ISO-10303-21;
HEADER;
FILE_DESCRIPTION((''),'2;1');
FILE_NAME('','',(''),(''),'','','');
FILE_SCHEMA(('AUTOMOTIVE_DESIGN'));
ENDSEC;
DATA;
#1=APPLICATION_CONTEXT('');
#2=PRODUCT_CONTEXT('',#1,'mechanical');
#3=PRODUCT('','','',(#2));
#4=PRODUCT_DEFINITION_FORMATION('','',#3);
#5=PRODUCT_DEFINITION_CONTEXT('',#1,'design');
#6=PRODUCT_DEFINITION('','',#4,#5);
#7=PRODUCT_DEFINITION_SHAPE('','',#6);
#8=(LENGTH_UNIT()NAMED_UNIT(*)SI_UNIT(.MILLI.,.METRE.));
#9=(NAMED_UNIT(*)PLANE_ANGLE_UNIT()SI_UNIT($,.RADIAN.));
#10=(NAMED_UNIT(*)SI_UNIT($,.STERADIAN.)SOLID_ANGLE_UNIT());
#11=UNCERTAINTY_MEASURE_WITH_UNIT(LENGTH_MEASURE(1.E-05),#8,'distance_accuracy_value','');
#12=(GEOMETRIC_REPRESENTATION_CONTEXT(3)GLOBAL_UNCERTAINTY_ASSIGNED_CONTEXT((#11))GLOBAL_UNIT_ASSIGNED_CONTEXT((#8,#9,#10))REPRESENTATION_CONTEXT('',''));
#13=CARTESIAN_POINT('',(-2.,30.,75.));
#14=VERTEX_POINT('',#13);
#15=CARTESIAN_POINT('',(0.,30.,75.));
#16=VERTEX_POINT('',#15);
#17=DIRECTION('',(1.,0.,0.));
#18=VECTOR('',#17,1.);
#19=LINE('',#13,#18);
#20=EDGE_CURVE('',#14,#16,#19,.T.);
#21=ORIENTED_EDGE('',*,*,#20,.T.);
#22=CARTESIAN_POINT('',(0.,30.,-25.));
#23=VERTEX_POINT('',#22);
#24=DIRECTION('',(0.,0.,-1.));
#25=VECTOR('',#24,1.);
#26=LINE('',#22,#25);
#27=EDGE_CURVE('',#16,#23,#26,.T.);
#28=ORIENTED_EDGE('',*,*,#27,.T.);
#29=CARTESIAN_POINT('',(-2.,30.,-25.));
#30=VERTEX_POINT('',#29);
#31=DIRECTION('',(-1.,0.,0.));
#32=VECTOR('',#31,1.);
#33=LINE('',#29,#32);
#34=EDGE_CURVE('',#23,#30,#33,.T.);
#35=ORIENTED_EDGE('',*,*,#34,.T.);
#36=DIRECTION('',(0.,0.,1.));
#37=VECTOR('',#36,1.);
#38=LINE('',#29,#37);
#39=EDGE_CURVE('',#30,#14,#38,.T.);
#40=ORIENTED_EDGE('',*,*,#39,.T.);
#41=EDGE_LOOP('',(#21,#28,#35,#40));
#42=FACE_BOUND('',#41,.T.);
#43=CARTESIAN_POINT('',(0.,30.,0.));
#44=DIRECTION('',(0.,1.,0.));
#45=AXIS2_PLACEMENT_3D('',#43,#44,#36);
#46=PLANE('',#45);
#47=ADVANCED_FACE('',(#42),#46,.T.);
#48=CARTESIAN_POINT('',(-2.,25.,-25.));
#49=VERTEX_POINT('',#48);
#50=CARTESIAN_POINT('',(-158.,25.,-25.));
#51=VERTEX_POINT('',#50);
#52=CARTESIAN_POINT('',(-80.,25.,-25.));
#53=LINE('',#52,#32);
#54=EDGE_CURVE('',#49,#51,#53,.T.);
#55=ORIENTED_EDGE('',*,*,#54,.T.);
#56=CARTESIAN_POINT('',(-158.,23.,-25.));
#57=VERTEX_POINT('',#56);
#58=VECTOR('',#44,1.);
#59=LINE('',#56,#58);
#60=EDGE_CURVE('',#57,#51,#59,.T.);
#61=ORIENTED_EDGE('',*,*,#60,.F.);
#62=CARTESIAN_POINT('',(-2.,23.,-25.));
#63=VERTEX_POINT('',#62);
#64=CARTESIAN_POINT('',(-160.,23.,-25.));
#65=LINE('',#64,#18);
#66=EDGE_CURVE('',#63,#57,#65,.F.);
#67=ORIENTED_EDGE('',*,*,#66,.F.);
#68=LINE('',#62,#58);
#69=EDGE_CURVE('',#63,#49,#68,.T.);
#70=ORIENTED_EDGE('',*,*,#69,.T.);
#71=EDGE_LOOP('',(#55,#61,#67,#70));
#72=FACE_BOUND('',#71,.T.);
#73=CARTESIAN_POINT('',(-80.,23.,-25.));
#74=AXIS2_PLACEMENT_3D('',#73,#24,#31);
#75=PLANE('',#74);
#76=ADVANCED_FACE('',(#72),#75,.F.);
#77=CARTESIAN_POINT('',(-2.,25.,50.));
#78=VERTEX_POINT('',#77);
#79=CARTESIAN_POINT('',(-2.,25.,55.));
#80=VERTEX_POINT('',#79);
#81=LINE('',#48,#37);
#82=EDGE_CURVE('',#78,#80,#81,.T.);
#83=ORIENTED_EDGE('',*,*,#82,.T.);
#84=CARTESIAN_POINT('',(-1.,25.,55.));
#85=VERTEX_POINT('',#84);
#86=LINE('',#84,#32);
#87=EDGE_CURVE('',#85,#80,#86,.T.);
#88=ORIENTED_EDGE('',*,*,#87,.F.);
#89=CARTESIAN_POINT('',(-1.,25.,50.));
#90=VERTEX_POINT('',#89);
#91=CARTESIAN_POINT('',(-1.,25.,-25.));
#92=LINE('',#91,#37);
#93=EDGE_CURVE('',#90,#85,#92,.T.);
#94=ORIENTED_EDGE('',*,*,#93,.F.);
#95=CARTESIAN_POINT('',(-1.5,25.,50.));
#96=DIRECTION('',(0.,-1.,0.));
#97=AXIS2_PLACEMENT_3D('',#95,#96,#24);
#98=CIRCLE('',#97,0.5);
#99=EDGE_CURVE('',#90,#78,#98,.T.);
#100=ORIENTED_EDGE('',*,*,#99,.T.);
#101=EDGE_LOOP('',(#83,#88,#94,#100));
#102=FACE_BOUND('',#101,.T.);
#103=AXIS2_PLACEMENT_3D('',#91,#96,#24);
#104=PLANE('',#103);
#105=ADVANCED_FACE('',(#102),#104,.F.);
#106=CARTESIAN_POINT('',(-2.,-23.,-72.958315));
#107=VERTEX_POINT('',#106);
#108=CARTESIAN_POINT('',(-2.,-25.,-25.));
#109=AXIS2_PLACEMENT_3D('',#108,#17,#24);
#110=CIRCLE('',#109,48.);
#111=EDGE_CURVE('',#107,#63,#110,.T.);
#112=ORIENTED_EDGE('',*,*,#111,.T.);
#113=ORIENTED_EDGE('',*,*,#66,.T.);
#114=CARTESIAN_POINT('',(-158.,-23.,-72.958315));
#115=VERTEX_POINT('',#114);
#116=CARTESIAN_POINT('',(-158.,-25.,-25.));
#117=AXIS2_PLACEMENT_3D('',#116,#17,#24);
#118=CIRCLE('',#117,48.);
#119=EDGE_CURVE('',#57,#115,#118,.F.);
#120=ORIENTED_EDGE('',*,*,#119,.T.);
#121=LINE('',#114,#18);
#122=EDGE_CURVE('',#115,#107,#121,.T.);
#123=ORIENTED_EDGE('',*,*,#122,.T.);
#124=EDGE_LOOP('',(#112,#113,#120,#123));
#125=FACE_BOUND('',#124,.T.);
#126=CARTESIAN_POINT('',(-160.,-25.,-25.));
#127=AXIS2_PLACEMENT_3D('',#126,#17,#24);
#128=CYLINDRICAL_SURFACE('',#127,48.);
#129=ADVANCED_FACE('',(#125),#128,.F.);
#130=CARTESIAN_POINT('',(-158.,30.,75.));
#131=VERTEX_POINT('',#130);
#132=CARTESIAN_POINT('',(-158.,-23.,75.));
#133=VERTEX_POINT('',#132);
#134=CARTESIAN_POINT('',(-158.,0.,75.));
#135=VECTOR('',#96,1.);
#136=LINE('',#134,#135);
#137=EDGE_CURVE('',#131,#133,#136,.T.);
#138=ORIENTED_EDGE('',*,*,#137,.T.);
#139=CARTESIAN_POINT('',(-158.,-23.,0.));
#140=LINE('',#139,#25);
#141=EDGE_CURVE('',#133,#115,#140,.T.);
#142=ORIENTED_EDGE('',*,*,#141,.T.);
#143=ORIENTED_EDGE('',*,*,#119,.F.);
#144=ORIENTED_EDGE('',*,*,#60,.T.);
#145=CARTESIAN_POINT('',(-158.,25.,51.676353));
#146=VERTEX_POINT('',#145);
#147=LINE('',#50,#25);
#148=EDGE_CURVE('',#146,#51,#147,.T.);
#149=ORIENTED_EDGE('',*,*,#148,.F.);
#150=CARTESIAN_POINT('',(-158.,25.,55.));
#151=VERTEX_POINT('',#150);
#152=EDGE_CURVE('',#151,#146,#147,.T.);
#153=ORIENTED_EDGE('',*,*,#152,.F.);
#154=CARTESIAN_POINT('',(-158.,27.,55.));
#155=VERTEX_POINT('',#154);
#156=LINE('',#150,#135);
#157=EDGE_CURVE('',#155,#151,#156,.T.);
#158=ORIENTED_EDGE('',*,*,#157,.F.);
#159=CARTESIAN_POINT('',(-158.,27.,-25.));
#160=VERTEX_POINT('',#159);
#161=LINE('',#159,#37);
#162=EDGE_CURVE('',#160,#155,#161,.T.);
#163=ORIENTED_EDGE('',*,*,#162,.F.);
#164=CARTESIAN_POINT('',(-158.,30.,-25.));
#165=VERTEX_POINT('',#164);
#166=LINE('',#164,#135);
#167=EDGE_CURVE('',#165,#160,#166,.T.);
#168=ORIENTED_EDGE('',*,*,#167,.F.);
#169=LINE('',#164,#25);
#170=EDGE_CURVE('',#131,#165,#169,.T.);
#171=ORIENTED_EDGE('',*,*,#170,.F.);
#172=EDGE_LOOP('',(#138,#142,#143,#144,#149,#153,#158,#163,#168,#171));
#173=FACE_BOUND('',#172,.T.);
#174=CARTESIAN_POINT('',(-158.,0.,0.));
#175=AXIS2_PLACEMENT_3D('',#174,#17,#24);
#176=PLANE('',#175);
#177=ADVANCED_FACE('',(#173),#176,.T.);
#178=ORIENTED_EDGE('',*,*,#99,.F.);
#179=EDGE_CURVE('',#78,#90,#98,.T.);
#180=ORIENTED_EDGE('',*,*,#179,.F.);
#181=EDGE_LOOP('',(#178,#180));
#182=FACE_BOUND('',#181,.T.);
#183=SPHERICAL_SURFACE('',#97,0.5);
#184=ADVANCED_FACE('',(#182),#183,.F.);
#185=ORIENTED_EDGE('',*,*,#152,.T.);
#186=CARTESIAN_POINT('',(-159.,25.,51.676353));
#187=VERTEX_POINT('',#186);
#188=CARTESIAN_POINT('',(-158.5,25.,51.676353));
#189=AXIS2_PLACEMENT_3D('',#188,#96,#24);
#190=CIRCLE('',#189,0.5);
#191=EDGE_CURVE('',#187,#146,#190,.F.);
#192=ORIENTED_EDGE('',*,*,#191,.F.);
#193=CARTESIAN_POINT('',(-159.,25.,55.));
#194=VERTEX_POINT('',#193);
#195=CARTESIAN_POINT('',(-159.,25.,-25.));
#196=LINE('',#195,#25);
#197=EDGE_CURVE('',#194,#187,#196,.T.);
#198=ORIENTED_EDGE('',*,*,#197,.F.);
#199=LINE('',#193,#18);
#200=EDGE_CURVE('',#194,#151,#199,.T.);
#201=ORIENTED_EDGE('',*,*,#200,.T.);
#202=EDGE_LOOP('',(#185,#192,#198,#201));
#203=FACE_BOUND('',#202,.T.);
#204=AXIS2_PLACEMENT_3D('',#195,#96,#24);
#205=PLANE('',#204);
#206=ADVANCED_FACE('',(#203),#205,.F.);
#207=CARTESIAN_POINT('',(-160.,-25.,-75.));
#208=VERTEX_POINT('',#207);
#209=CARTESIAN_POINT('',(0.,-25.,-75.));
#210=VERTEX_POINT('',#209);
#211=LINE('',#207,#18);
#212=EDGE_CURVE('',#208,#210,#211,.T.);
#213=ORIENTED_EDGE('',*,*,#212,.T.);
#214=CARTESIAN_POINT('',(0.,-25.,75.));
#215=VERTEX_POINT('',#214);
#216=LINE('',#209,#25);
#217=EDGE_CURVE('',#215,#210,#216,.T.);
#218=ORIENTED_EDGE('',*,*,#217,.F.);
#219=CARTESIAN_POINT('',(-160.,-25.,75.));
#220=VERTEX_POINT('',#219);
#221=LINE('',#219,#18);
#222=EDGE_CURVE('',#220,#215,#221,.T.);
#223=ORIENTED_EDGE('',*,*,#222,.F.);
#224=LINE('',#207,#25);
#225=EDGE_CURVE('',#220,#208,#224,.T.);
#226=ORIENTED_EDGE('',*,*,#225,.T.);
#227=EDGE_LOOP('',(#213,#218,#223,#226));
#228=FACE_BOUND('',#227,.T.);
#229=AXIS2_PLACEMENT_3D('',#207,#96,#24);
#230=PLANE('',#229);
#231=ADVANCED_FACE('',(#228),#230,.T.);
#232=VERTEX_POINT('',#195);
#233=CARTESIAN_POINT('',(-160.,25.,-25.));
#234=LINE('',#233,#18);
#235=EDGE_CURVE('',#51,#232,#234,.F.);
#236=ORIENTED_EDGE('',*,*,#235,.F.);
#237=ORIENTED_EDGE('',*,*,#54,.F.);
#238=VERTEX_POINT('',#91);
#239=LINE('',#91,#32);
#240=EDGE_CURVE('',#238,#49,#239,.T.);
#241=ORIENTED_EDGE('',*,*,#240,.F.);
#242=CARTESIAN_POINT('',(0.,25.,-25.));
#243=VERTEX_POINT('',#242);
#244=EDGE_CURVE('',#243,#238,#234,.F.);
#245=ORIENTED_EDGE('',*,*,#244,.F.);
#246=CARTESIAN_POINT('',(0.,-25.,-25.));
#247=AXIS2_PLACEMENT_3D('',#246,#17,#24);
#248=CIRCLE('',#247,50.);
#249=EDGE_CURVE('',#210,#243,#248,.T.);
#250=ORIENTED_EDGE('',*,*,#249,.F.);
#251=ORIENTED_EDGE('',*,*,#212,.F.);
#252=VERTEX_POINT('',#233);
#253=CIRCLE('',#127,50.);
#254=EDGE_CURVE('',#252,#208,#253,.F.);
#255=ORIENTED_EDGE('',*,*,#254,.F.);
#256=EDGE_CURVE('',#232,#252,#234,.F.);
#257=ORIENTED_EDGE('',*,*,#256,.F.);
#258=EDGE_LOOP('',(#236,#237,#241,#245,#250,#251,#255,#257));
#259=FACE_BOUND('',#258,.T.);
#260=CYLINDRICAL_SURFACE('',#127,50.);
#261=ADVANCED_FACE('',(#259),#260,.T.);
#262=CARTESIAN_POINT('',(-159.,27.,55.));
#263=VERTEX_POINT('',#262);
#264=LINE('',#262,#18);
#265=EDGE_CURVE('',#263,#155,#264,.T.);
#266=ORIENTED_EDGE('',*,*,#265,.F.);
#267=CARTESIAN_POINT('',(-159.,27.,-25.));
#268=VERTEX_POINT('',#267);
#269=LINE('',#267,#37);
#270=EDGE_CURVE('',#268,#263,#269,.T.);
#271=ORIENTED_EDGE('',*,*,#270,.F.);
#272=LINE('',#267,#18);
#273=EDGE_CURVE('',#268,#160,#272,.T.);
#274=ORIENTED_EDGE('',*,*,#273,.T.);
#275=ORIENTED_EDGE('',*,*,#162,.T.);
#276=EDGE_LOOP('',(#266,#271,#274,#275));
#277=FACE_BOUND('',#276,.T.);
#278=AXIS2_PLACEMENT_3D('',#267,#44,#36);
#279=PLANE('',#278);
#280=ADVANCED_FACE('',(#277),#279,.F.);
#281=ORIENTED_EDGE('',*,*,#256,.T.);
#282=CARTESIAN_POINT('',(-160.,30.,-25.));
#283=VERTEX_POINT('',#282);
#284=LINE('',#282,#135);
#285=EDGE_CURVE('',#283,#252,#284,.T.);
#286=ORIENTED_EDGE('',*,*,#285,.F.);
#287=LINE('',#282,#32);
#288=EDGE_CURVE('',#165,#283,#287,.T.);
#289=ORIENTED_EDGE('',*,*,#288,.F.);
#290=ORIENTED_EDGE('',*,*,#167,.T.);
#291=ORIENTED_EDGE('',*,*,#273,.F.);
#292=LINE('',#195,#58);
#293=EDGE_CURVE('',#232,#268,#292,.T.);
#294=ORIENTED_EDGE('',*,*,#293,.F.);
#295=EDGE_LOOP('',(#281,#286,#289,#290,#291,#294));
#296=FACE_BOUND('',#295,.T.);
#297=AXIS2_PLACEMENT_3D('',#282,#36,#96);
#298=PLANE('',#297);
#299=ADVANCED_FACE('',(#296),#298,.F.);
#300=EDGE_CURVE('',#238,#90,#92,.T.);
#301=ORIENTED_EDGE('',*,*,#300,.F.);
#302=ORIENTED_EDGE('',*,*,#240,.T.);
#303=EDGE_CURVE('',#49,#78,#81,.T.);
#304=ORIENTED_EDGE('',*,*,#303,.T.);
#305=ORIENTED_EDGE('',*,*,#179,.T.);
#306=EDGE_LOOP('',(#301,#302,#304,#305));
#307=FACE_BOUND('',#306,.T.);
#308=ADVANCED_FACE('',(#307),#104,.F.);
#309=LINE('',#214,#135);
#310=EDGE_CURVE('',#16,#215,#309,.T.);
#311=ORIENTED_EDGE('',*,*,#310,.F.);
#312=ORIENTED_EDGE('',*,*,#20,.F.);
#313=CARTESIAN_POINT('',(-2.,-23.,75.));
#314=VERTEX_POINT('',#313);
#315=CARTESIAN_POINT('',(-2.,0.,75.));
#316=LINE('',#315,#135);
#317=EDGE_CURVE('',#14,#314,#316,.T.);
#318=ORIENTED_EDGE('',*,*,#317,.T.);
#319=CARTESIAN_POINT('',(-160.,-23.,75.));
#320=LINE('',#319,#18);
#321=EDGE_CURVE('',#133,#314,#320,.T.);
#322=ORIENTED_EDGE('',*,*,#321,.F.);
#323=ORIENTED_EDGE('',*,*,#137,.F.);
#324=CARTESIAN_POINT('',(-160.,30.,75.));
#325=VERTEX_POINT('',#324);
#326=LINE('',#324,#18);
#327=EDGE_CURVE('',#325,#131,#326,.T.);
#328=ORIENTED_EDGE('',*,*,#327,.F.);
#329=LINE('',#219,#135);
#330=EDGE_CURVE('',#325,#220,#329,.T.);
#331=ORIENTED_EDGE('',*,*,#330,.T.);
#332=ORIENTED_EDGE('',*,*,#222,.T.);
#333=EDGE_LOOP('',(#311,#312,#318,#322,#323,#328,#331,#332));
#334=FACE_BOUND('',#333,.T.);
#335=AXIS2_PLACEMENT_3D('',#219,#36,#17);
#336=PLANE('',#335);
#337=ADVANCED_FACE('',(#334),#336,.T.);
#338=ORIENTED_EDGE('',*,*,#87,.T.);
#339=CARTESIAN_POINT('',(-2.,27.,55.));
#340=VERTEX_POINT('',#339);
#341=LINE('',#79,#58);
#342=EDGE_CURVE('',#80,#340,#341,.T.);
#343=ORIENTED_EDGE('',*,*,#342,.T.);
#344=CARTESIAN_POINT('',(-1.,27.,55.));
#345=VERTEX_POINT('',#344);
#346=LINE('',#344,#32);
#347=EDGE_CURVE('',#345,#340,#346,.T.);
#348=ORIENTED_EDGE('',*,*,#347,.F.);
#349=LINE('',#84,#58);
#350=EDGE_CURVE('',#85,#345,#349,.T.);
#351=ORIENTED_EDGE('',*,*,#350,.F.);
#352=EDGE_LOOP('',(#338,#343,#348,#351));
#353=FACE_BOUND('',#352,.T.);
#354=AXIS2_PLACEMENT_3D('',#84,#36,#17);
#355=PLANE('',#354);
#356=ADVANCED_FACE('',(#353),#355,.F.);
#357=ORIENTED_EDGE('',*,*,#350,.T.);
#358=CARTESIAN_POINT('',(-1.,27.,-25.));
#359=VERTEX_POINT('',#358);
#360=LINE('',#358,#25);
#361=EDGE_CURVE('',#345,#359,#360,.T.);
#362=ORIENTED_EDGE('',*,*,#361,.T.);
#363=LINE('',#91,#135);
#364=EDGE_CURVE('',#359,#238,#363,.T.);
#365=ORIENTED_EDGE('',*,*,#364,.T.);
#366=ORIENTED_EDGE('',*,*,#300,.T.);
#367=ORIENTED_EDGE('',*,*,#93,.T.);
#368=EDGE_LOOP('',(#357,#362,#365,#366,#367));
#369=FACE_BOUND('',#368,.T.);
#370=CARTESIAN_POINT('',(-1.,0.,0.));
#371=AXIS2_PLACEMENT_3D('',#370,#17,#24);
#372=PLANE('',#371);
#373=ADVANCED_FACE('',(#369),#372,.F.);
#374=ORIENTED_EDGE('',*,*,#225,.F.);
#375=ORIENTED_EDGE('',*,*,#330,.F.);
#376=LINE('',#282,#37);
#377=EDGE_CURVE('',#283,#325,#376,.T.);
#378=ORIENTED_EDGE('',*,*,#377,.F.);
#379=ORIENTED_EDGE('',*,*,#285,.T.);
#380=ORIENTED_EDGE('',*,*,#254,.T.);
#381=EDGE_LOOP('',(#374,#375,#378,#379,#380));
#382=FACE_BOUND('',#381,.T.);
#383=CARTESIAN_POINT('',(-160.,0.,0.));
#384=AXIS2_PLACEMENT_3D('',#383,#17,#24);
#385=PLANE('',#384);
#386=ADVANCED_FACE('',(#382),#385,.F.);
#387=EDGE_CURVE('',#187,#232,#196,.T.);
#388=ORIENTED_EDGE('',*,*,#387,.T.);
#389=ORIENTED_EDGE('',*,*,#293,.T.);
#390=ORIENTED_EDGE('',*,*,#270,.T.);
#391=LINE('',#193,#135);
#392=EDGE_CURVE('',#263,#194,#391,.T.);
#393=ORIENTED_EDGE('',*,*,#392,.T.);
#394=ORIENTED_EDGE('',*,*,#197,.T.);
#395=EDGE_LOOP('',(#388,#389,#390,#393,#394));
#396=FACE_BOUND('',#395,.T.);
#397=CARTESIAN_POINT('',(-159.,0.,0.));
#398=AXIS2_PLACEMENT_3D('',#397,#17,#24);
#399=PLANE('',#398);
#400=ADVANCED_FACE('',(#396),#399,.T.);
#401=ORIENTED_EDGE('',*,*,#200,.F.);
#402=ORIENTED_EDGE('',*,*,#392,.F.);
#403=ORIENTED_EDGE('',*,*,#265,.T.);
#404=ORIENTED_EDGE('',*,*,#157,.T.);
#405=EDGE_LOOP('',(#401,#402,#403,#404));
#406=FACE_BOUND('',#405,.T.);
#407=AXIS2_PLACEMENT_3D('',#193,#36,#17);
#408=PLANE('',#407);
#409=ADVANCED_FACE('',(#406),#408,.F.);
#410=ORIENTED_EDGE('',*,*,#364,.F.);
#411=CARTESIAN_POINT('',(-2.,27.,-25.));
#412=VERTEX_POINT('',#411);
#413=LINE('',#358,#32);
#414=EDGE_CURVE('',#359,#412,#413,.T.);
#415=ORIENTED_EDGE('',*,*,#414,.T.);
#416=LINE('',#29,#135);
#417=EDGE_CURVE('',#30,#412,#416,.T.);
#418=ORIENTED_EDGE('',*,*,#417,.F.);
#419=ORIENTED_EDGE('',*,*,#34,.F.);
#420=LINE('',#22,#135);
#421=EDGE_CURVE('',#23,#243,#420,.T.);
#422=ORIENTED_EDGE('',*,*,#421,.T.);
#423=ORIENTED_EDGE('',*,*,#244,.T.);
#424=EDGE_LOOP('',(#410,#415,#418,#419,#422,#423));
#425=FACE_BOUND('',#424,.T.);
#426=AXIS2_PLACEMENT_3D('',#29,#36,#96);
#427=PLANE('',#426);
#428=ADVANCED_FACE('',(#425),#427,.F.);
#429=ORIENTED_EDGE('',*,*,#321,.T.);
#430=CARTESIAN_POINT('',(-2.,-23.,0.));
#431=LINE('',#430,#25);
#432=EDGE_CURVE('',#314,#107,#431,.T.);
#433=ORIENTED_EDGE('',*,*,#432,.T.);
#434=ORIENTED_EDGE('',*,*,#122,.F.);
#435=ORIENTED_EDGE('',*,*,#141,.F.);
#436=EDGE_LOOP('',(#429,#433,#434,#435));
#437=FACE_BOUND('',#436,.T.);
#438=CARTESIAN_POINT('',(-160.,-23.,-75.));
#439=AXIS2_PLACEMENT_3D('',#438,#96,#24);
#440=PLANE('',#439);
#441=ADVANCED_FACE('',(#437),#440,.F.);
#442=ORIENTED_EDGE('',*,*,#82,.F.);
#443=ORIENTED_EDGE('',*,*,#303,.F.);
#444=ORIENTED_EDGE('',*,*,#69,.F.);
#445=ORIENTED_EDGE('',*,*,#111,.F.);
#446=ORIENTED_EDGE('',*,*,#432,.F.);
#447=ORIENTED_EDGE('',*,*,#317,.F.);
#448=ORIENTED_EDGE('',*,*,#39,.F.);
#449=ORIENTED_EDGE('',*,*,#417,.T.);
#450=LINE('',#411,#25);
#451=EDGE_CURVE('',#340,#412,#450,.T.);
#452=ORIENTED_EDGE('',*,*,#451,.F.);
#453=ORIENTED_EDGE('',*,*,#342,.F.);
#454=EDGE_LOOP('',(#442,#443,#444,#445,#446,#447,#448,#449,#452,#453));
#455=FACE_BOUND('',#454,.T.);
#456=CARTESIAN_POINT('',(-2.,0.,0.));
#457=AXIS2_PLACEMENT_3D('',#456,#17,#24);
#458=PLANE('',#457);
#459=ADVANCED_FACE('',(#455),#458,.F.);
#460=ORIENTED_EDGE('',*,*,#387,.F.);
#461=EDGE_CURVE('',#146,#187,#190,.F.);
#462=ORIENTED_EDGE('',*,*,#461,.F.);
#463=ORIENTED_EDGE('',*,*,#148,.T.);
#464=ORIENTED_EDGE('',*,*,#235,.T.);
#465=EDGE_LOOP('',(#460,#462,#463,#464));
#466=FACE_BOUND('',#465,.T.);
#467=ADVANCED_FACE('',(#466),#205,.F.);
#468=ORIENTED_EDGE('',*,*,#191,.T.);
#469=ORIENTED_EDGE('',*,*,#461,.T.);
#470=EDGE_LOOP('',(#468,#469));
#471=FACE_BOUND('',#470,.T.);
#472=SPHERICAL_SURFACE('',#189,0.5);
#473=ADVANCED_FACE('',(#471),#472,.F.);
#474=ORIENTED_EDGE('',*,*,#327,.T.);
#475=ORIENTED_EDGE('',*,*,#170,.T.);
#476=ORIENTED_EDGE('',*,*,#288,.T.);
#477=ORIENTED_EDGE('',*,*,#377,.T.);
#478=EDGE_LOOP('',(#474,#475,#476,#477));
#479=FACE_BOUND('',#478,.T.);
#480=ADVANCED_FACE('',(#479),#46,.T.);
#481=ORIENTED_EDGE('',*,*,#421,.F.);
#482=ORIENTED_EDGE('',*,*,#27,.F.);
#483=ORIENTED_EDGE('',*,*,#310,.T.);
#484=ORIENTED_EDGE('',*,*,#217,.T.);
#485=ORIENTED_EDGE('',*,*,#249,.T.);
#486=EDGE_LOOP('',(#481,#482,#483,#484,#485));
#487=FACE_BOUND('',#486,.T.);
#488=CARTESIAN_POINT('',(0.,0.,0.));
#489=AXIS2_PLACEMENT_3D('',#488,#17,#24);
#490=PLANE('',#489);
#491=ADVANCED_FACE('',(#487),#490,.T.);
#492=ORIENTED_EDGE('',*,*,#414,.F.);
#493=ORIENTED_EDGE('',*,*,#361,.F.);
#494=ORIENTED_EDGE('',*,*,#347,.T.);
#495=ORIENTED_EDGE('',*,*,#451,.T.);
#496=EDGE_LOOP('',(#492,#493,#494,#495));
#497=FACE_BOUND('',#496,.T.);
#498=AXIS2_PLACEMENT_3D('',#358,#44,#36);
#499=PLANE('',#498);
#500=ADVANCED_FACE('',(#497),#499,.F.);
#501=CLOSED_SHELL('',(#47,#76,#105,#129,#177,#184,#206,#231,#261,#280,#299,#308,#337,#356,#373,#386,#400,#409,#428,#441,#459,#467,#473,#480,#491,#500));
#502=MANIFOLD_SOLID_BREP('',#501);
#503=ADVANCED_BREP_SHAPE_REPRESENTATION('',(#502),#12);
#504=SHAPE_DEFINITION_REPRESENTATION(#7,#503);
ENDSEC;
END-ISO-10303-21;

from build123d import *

# Parameters (mm, degrees)
SKETCH1_W           = 150
SKETCH1_H           = 50
BOSS_EXTRUDE1_DEPTH = 160
FILLET2_R           = 50
SHELL1_T            = -2
CUT_EXTRUDE1_DEPTH  = 2
SKETCH20_W          = 2
SKETCH20_H          = 100
BOSS_EXTRUDE2_DEPTH = 5
SKETCH21_W          = 80
SKETCH21_H          = 2
CUT_EXTRUDE2_DEPTH  = 1
SKETCH22_W          = 80
SKETCH22_H          = 2
CUT_EXTRUDE3_DEPTH  = 1


with BuildPart() as part:
    # Sketch1 → Boss-Extrude1 (new body)
    with BuildSketch(Plane(origin=(0, 0, 0), x_dir=(0, 0, -1), z_dir=(1, 0, 0))):
        Rectangle(SKETCH1_W, SKETCH1_H)
    extrude(amount=-BOSS_EXTRUDE1_DEPTH)

    # Fillet2
    fillet2_edges = [part.edges().sort_by_distance(p)[0] for p in [
        (-80, 25, -75),
    ]]
    fillet(fillet2_edges, radius=FILLET2_R - 0.0001)  # a hair under: the kernel refuses the full size

    # Shell1
    shell1_openings = [part.faces().sort_by_distance(p)[0] for p in [
        (-80, 0, 75),
    ]]
    offset(amount=SHELL1_T, openings=shell1_openings, kind=Kind.INTERSECTION)

    # Sketch17 → Cut-Extrude1 (cut)
    with BuildSketch(Plane(origin=(0, 25, 0), x_dir=(1, 0, 0), z_dir=(0, 1, 0))):
        Polygon((-80, 25), (-158, 25), (-158, -75), (-2, -75), (-2, 25), align=None)
    extrude(amount=-CUT_EXTRUDE1_DEPTH, mode=Mode.SUBTRACT)

    # Sketch20 → Boss-Extrude2 (add)
    with BuildSketch(Plane(origin=(0, 25, 0), x_dir=(1, 0, 0), z_dir=(0, 1, 0))):
        with Locations((-159, -25)):
            Rectangle(SKETCH20_W, SKETCH20_H)
        with Locations((-1, -25)):
            Rectangle(SKETCH20_W, SKETCH20_H)
    extrude(amount=BOSS_EXTRUDE2_DEPTH)

    # Sketch21 → Cut-Extrude2 (cut)
    with BuildSketch(Plane(origin=(-158, 0, 0), x_dir=(0, 0, -1), z_dir=(1, 0, 0))):
        with Locations((-15, 26)):
            Rectangle(SKETCH21_W, SKETCH21_H)
    extrude(amount=-CUT_EXTRUDE2_DEPTH, mode=Mode.SUBTRACT)

    # Sketch22 → Cut-Extrude3 (cut)
    with BuildSketch(Plane.ZY.offset(2)):
        with Locations((15, 26)):
            Rectangle(SKETCH22_W, SKETCH22_H)
    extrude(amount=-CUT_EXTRUDE3_DEPTH, mode=Mode.SUBTRACT)

    # Sketch25 → Cut-Revolve1 (revolve, cut)
    with BuildSketch(Plane(origin=(0, 25, 0), x_dir=(1, 0, 0), z_dir=(0, 1, 0))):
        with BuildLine():
            ThreePointArc((-1.475259699, -50.499387542), (-1.999387542, -50.024740301), (-1.524740301, -49.500612458))
            Line((-1.524740301, -49.500612458), (-1.5, -50))
            Line((-1.5, -50), (-1.475259699, -50.499387542))
        make_face()
    revolve(axis=Axis((-1.5, 25, 50), (-0.049480602249094376, 0, -0.9987750847919)), mode=Mode.SUBTRACT)

    # Sketch26 → Cut-Revolve2 (revolve, cut)
    with BuildSketch(Plane(origin=(0, 25, 0), x_dir=(1, 0, 0), z_dir=(0, 1, 0))):
        with BuildLine():
            Line((-158, -51.676352911), (-159, -51.676352911))
            ThreePointArc((-159, -51.676352911), (-158.5, -52.176352911), (-158, -51.676352911))
        make_face()
    revolve(axis=Axis((-158, 25, 51.676352911), (-1, 0, 0)), mode=Mode.SUBTRACT)


solid = part.part
